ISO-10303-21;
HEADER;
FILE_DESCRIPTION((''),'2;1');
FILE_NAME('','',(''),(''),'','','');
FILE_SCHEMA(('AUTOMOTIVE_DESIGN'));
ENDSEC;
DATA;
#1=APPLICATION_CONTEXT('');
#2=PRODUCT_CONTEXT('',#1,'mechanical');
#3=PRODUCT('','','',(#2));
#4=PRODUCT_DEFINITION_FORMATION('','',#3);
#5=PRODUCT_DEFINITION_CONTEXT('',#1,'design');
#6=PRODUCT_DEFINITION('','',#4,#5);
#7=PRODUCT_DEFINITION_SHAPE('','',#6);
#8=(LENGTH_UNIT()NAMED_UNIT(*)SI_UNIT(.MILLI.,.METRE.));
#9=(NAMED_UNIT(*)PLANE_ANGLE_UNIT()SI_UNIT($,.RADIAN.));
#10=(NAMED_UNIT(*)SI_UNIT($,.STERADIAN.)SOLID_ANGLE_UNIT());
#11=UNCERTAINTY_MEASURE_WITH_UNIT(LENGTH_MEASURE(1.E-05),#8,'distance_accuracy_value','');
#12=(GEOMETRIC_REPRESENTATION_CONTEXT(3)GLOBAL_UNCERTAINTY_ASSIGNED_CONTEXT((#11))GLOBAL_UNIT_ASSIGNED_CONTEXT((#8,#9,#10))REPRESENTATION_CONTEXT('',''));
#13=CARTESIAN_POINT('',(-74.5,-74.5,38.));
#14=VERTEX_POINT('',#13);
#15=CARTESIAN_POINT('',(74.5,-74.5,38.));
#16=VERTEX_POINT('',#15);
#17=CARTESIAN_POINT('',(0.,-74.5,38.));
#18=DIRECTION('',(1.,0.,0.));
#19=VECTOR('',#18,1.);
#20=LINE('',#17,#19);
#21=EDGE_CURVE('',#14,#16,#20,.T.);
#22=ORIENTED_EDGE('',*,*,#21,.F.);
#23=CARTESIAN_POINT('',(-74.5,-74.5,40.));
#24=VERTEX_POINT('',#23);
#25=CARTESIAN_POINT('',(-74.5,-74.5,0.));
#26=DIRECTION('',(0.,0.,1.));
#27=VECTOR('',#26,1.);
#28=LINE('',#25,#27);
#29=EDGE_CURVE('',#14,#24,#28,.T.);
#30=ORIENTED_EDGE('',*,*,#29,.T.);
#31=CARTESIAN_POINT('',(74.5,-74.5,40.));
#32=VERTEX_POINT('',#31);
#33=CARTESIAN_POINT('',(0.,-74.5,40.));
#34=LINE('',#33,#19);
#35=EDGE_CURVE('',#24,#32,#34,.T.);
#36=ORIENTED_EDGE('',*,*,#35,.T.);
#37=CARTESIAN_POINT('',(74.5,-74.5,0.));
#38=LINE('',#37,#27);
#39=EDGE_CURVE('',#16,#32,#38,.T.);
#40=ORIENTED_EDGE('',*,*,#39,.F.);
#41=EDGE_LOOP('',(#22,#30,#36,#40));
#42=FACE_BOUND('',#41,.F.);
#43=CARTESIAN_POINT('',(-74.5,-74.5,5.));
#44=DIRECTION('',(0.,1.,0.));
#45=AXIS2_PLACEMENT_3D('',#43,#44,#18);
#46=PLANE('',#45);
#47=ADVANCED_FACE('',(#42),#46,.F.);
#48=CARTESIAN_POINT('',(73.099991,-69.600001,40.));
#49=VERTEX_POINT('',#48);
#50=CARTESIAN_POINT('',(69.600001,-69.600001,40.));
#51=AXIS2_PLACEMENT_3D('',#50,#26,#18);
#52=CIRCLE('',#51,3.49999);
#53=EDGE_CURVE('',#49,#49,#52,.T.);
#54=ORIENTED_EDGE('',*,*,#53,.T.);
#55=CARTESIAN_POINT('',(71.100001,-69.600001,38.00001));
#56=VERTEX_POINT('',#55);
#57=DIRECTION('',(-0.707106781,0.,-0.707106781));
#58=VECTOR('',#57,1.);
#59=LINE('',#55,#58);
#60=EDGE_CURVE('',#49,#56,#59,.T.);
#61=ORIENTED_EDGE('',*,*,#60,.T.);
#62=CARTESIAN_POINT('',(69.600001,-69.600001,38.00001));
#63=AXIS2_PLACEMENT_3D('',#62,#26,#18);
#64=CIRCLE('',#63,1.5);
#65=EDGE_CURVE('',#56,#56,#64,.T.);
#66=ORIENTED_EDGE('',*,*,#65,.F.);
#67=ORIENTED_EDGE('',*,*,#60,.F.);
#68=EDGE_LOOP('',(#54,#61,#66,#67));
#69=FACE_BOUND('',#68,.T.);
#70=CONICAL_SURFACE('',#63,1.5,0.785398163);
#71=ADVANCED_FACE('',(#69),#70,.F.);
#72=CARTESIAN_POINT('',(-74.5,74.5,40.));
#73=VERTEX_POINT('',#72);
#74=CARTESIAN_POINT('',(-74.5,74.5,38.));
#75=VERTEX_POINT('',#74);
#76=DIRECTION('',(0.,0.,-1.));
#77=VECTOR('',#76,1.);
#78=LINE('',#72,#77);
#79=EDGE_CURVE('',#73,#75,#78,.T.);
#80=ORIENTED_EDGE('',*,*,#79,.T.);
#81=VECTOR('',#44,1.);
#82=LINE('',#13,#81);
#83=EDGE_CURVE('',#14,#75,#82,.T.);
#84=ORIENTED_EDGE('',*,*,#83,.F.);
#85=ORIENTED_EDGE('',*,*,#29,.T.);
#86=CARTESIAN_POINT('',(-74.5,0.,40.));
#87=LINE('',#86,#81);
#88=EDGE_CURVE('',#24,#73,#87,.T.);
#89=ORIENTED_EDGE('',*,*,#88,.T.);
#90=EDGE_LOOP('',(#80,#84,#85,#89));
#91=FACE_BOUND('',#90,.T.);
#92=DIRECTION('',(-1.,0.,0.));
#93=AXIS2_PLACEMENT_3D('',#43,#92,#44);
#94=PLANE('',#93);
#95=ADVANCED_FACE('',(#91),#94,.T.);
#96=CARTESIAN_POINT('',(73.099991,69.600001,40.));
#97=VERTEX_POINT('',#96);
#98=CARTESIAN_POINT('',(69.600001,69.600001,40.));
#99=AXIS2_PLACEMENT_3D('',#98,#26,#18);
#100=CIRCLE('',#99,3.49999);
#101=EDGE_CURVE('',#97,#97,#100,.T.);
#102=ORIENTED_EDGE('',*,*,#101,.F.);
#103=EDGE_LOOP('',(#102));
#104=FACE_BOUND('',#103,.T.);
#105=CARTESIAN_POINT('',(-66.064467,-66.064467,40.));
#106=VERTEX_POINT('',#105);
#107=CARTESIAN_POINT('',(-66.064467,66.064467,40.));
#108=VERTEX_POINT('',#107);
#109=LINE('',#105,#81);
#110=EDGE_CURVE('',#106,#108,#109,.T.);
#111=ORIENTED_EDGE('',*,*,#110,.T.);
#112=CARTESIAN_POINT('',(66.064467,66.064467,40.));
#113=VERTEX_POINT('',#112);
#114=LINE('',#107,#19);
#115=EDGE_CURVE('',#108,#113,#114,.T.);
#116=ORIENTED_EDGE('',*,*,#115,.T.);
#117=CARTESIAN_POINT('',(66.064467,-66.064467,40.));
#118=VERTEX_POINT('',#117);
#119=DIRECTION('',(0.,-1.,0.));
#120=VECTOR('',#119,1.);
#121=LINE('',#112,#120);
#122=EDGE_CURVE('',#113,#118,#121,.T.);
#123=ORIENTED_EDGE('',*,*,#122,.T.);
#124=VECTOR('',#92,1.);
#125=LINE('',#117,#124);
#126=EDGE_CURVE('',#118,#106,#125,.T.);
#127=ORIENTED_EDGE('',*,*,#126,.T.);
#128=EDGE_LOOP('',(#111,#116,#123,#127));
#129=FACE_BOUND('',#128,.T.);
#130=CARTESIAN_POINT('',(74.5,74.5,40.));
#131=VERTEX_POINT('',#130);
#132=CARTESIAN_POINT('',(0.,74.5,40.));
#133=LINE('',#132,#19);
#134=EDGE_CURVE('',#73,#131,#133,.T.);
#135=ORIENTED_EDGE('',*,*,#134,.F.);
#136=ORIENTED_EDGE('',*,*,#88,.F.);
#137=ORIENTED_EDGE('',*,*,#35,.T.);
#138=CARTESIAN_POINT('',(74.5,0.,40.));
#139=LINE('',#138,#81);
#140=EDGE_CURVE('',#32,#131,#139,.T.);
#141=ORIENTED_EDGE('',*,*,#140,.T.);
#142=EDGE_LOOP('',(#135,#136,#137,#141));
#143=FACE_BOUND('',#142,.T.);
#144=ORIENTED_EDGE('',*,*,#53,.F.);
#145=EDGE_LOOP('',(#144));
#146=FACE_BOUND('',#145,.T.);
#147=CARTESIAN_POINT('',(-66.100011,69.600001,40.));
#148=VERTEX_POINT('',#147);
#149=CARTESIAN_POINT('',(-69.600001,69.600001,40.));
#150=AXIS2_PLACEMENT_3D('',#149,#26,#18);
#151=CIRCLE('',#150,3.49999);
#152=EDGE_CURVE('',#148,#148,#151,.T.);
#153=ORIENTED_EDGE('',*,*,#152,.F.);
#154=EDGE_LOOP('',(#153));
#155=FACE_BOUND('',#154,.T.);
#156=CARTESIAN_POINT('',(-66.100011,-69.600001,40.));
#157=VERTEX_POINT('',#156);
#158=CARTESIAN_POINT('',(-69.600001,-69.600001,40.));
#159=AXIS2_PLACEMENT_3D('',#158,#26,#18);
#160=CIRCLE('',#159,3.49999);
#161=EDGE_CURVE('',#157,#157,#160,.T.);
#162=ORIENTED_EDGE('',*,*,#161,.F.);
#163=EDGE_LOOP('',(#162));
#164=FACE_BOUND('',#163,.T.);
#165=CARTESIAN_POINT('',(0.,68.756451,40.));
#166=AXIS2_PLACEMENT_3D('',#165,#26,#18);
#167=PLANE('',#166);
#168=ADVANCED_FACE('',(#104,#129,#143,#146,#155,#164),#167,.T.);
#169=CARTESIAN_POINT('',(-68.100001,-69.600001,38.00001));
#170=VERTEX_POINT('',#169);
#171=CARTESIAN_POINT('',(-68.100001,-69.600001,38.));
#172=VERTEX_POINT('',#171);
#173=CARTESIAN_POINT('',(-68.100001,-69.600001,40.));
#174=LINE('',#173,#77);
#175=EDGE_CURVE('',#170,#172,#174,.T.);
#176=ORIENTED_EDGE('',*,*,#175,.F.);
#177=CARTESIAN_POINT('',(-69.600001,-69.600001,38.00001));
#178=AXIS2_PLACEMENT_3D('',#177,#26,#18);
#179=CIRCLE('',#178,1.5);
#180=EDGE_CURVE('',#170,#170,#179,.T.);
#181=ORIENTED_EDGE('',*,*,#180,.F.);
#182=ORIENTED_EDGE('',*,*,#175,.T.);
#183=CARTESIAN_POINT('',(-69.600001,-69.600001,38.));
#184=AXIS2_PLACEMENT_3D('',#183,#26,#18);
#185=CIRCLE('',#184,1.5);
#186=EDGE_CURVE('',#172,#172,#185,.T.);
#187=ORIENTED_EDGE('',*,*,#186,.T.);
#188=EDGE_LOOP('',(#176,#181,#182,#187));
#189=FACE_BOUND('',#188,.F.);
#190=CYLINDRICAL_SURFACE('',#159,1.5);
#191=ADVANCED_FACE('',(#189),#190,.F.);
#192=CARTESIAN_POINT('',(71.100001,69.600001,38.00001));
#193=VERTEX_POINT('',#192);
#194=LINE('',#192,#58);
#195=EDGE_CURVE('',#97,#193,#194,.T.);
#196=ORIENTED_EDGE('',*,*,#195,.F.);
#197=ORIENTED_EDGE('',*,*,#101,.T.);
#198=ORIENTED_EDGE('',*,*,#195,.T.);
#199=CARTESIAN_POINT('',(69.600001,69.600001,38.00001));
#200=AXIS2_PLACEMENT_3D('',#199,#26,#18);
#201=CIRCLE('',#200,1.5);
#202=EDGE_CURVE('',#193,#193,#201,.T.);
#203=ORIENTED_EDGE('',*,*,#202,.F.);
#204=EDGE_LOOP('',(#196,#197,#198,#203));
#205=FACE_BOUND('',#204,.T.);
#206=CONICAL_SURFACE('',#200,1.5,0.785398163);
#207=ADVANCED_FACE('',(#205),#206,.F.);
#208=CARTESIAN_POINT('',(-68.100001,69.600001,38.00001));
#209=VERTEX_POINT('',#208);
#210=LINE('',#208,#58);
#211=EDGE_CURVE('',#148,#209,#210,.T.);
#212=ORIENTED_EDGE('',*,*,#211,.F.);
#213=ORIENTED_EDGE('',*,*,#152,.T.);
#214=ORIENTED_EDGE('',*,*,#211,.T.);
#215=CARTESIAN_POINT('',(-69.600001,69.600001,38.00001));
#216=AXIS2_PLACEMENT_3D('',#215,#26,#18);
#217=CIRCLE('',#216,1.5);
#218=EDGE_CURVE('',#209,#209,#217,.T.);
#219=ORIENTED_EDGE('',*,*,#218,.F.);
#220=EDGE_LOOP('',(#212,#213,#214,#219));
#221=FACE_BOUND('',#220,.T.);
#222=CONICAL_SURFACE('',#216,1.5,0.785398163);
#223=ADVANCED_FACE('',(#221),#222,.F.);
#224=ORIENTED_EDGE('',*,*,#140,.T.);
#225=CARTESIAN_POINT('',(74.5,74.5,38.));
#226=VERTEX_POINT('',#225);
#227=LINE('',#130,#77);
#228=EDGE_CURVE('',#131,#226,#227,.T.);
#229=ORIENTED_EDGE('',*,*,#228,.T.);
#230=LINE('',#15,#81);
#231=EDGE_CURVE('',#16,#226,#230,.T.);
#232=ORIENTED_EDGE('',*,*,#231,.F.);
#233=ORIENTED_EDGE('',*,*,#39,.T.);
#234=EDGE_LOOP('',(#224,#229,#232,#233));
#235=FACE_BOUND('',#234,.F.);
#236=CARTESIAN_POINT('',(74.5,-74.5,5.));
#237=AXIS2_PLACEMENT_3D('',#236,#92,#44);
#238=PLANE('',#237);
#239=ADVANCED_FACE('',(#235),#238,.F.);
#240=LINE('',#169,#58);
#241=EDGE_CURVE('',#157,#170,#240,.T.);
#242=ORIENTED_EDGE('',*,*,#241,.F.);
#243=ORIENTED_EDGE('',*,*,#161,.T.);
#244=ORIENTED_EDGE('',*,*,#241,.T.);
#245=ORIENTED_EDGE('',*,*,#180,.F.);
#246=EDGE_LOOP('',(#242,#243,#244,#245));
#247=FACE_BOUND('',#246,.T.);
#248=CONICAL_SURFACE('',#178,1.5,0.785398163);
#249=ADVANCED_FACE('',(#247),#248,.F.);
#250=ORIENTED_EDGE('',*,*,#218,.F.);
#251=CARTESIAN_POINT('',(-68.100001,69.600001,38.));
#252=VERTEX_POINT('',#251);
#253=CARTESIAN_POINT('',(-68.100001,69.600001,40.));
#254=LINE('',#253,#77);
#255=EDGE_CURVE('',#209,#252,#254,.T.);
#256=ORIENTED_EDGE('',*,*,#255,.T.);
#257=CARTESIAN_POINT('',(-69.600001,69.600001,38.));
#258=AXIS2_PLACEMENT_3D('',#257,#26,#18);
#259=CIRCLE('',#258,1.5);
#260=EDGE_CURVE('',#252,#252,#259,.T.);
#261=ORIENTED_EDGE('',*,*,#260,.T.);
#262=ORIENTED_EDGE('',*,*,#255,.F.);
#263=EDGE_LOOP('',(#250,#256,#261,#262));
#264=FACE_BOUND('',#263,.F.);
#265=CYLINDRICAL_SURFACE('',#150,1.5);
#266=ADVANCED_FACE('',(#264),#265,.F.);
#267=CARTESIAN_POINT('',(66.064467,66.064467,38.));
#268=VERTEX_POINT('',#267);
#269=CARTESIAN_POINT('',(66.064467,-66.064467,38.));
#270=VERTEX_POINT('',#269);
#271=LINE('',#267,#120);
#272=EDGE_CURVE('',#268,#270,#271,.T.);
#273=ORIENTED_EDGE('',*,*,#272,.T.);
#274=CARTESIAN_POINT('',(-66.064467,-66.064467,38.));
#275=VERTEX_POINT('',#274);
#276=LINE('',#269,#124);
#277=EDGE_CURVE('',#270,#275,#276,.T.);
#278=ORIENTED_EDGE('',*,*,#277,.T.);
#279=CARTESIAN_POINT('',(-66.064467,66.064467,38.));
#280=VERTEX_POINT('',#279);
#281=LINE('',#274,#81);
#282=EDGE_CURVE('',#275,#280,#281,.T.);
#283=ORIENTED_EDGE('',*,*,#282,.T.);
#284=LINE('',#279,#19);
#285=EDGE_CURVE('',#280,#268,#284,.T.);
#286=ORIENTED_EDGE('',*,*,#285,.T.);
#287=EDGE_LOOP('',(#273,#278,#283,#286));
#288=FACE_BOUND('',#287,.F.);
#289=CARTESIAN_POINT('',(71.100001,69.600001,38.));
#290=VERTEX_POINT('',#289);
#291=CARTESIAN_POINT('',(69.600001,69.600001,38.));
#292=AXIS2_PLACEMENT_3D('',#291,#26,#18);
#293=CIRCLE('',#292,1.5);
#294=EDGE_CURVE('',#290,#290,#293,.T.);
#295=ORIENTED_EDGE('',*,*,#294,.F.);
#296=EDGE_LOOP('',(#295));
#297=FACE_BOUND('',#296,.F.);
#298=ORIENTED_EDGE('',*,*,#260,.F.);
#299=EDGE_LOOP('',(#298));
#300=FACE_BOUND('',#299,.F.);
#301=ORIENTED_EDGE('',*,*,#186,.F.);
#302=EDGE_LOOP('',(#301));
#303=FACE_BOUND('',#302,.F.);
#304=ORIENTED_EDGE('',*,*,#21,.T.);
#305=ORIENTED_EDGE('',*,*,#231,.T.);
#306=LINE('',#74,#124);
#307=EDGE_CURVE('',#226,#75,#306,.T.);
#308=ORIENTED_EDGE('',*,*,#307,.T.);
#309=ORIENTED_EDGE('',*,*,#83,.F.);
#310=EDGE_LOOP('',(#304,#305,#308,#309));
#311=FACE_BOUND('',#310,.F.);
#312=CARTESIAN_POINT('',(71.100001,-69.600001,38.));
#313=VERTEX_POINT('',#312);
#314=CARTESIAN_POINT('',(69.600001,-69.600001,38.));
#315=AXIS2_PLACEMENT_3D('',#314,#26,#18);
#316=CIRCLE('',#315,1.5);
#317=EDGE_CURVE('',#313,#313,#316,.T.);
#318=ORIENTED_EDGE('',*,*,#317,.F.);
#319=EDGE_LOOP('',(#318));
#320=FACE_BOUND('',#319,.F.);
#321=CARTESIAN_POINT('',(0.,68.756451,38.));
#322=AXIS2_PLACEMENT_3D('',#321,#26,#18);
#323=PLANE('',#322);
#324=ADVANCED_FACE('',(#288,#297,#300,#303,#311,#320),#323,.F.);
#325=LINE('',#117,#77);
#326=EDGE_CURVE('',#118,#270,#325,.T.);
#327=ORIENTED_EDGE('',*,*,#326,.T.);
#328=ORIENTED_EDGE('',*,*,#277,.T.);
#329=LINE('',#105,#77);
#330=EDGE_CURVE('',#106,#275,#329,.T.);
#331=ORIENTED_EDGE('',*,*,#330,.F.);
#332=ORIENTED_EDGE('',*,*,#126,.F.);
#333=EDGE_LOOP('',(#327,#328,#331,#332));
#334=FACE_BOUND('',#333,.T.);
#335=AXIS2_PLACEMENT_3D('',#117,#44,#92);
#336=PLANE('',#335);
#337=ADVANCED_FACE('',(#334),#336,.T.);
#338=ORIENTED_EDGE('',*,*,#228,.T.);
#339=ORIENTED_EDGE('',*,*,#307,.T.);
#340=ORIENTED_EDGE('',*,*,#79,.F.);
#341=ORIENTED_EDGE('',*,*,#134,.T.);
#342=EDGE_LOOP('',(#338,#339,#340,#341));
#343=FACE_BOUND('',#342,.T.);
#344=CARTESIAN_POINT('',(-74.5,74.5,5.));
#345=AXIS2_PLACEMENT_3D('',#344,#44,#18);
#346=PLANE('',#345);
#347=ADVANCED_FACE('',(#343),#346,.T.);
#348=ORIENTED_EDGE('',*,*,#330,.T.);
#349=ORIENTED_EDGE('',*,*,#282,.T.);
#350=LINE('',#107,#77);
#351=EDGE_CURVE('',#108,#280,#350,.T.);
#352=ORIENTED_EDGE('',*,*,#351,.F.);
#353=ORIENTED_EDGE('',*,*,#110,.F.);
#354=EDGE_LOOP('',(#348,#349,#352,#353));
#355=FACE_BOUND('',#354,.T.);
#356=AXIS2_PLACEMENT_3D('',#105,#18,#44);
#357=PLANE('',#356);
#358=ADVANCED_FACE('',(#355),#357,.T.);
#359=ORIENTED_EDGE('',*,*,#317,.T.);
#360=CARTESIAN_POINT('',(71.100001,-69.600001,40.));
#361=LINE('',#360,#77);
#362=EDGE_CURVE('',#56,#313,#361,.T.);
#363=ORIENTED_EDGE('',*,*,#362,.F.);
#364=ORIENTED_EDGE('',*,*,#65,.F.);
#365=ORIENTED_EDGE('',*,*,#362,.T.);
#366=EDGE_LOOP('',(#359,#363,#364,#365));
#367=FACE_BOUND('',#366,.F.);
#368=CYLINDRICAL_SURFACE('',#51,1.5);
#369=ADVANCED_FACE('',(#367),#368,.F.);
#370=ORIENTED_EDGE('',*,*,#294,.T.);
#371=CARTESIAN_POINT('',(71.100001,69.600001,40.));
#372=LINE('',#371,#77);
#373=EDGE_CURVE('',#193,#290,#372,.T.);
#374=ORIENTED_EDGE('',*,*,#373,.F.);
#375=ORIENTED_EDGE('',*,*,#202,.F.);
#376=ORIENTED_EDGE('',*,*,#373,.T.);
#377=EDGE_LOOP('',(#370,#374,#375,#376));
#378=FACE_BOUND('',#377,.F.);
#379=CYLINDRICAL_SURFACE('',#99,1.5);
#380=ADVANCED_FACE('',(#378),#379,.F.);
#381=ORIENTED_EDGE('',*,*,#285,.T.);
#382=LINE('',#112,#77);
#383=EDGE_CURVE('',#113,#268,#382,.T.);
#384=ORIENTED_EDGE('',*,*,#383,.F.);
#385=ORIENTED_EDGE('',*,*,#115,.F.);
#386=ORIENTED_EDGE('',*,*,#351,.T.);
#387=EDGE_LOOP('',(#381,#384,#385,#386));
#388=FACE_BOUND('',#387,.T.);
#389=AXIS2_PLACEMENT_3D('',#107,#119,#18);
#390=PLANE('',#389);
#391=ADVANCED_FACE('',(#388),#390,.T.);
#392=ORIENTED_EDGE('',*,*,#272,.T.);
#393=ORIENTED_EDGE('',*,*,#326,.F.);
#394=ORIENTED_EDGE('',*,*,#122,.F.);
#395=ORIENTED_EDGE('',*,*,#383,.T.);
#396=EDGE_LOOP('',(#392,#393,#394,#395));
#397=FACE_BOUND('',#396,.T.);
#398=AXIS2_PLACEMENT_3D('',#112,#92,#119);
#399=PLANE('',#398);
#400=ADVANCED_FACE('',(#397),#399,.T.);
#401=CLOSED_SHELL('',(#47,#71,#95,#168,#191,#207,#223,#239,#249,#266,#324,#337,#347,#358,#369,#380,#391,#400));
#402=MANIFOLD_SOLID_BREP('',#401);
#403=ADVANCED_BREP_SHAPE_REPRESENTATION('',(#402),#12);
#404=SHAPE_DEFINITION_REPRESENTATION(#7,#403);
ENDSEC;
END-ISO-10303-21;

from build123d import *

# Parameters (mm, degrees)
F1_DEPTH  = 5
F0_W      = 115
F0_H      = 3
F0_W_2    = 3
F0_H_2    = 115
F2_DEPTH  = 2
F3_R      = 2.5
F4_DEPTH  = 5
F5_W      = 149
F5_H      = 149
F6_DEPTH  = 35
F7_R      = 1.5
F8_DEPTH  = 35
F9_W      = 149
F9_H      = 50.5775869712
F10_DEPTH = 200
F12_DEPTH = 2
F13_SIZE  = 1.99999


# Not quite as in the source:
# - a fillet or chamfer is up to 0.001 mm smaller than in the source, because OpenCascade refuses the exact size


with BuildPart() as f1:
    # F0 (on Top) → F1 (new body)
    with BuildSketch(Plane.XY):
        Polygon((74.5, 74.5), (60.5, 74.5), (-60.5, 74.5), (-74.5, 74.5), (-74.5, 60.5), (-74.5, -60.5), (-74.5, -74.5), (-60.5, -74.5), (60.5, -74.5), (74.5, -74.5), (74.5, -60.5), (74.5, 60.5), align=None)
        Polygon((57.5, 60.5), (60.5, 60.5), (60.5, 57.5), (60.5, -57.5), (60.5, -60.5), (57.5, -60.5), (-57.5, -60.5), (-60.5, -60.5), (-60.5, -57.5), (-60.5, 57.5), (-60.5, 60.5), (-57.5, 60.5), align=None, mode=Mode.SUBTRACT)
    extrude(amount=F1_DEPTH)

    # F0 (on Top) → F2 (join)
    with BuildSketch(Plane.XY):
        with Locations((0, 59)):
            Rectangle(F0_W, F0_H)
        with Locations((59, 59)):
            Rectangle(F0_W_2, F0_H)
        with Locations((59, 0)):
            Rectangle(F0_W_2, F0_H_2)
        with Locations((59, -59)):
            Rectangle(F0_W_2, F0_H)
        with Locations((0, -59)):
            Rectangle(F0_W, F0_H)
        with Locations((-59, 0)):
            Rectangle(F0_W_2, F0_H_2)
        with Locations((-59, -59)):
            Rectangle(F0_W_2, F0_H)
        with Locations((-59, 59)):
            Rectangle(F0_W_2, F0_H)
    extrude(amount=F2_DEPTH)

    # F3 (on face) → F4 (cut, through all)
    with BuildSketch(Plane.XY.offset(5)):
        with Locations((42.5219088793, 68.0854469538)):
            Circle(F3_R)
    extrude(amount=-F4_DEPTH, mode=Mode.SUBTRACT)

    # F5 (on face) → F6 (join)
    with BuildSketch(Plane.XY.offset(5)):
        Rectangle(F5_W, F5_H)
        Polygon((-60.5, 71.5), (60.5, 71.5), (71.5, 71.5), (71.5, 60.5), (71.5, -60.5), (71.5, -71.5), (60.5, -71.5), (-60.5, -71.5), (-71.5, -71.5), (-71.5, -60.5), (-71.5, 60.5), (-71.5, 71.5), align=None, mode=Mode.SUBTRACT)
    extrude(amount=F6_DEPTH)

    # F7 (on face) → F8 (join)
    with BuildSketch(Plane.XY.offset(40)):
        with BuildLine():
            ThreePointArc((-71.5, 64.975068144), (-66.8161183572, 65.4466893403), (-64.6000009775, 69.6000009775))
            ThreePointArc((-64.6000009775, 69.6000009775), (-64.6946638756, 70.5683335217), (-64.975068144, 71.5))
            Line((-64.975068144, 71.5), (-71.5, 71.5))
            Line((-71.5, 71.5), (-71.5, 64.975068144))
        make_face()
        with Locations((-69.6000009775, 69.6000009775)):
            Circle(F7_R, mode=Mode.SUBTRACT)
        with BuildLine():
            Line((71.5, 71.5), (64.975068144, 71.5))
            ThreePointArc((64.975068144, 71.5), (66.0644670716, 66.0644670716), (71.5, 64.975068144))
            Line((71.5, 64.975068144), (71.5, 71.5))
        make_face()
        with Locations((69.6000009775, 69.6000009775)):
            Circle(F7_R, mode=Mode.SUBTRACT)
        with BuildLine():
            Line((71.5, -71.5), (71.5, -64.975068144))
            ThreePointArc((71.5, -64.975068144), (66.0644670716, -66.0644670716), (64.975068144, -71.5))
            Line((64.975068144, -71.5), (71.5, -71.5))
        make_face()
        with Locations((69.6000009775, -69.6000009775)):
            Circle(F7_R, mode=Mode.SUBTRACT)
        with BuildLine():
            ThreePointArc((-64.6000009775, -69.6000009775), (-66.8161183572, -65.4466893403), (-71.5, -64.975068144))
            Line((-71.5, -64.975068144), (-71.5, -71.5))
            Line((-71.5, -71.5), (-64.975068144, -71.5))
            ThreePointArc((-64.975068144, -71.5), (-64.6946638756, -70.5683335217), (-64.6000009775, -69.6000009775))
        make_face()
        with Locations((-69.6000009775, -69.6000009775)):
            Circle(F7_R, mode=Mode.SUBTRACT)
    extrude(amount=-F8_DEPTH)

    # F9 (on face) → F10 (cut)
    with BuildSketch(Plane.XZ.offset(74.5)):
        with Locations((0, 12.7112065144)):
            Rectangle(F9_W, F9_H)
    extrude(amount=-F10_DEPTH, mode=Mode.SUBTRACT)

    # F11 (on face) → F12 (join)
    with BuildSketch(Plane.XY.offset(40)):
        with BuildLine():
            ThreePointArc((-64.975068144, 71.5), (-64.6974956073, 68.6174323567), (-66.0644670716, 66.0644670716))
            Line((-66.0644670716, 66.0644670716), (66.0644670716, 66.0644670716))
            ThreePointArc((66.0644670716, 66.0644670716), (64.6974956073, 68.6174323567), (64.975068144, 71.5))
            Line((64.975068144, 71.5), (-64.975068144, 71.5))
        make_face()
        with BuildLine():
            ThreePointArc((71.5, 64.975068144), (68.6174323567, 64.6974956073), (66.0644670716, 66.0644670716))
            Line((66.0644670716, 66.0644670716), (66.0644670716, -66.0644670716))
            ThreePointArc((66.0644670716, -66.0644670716), (68.6174323567, -64.6974956073), (71.5, -64.975068144))
            Line((71.5, -64.975068144), (71.5, 64.975068144))
        make_face()
        with BuildLine():
            Line((66.0644670716, -66.0644670716), (-66.0644670716, -66.0644670716))
            ThreePointArc((-66.0644670716, -66.0644670716), (-64.6974956073, -68.6174323567), (-64.975068144, -71.5))
            Line((-64.975068144, -71.5), (64.975068144, -71.5))
            ThreePointArc((64.975068144, -71.5), (64.6974956073, -68.6174323567), (66.0644670716, -66.0644670716))
        make_face()
        with BuildLine():
            Line((-66.0644670716, -66.0644670716), (-66.0644670716, 66.0644670716))
            ThreePointArc((-66.0644670716, 66.0644670716), (-68.6174323567, 64.6974956073), (-71.5, 64.975068144))
            Line((-71.5, 64.975068144), (-71.5, -64.975068144))
            ThreePointArc((-71.5, -64.975068144), (-68.6174323567, -64.6974956073), (-66.0644670716, -66.0644670716))
        make_face()
    extrude(amount=-F12_DEPTH)

    # F13 (size 2 in the source; OpenCascade refuses exactly that, so slightly less here)
    f13_edges = [f1.edges().sort_by_distance(p)[0] for p in [
        (-71.100001, 69.600001, 40),
        (68.100001, 69.600001, 40),
        (68.100001, -69.600001, 40),
        (-71.100001, -69.600001, 40),
    ]]
    chamfer(f13_edges, length=F13_SIZE)


solid = f1.part
